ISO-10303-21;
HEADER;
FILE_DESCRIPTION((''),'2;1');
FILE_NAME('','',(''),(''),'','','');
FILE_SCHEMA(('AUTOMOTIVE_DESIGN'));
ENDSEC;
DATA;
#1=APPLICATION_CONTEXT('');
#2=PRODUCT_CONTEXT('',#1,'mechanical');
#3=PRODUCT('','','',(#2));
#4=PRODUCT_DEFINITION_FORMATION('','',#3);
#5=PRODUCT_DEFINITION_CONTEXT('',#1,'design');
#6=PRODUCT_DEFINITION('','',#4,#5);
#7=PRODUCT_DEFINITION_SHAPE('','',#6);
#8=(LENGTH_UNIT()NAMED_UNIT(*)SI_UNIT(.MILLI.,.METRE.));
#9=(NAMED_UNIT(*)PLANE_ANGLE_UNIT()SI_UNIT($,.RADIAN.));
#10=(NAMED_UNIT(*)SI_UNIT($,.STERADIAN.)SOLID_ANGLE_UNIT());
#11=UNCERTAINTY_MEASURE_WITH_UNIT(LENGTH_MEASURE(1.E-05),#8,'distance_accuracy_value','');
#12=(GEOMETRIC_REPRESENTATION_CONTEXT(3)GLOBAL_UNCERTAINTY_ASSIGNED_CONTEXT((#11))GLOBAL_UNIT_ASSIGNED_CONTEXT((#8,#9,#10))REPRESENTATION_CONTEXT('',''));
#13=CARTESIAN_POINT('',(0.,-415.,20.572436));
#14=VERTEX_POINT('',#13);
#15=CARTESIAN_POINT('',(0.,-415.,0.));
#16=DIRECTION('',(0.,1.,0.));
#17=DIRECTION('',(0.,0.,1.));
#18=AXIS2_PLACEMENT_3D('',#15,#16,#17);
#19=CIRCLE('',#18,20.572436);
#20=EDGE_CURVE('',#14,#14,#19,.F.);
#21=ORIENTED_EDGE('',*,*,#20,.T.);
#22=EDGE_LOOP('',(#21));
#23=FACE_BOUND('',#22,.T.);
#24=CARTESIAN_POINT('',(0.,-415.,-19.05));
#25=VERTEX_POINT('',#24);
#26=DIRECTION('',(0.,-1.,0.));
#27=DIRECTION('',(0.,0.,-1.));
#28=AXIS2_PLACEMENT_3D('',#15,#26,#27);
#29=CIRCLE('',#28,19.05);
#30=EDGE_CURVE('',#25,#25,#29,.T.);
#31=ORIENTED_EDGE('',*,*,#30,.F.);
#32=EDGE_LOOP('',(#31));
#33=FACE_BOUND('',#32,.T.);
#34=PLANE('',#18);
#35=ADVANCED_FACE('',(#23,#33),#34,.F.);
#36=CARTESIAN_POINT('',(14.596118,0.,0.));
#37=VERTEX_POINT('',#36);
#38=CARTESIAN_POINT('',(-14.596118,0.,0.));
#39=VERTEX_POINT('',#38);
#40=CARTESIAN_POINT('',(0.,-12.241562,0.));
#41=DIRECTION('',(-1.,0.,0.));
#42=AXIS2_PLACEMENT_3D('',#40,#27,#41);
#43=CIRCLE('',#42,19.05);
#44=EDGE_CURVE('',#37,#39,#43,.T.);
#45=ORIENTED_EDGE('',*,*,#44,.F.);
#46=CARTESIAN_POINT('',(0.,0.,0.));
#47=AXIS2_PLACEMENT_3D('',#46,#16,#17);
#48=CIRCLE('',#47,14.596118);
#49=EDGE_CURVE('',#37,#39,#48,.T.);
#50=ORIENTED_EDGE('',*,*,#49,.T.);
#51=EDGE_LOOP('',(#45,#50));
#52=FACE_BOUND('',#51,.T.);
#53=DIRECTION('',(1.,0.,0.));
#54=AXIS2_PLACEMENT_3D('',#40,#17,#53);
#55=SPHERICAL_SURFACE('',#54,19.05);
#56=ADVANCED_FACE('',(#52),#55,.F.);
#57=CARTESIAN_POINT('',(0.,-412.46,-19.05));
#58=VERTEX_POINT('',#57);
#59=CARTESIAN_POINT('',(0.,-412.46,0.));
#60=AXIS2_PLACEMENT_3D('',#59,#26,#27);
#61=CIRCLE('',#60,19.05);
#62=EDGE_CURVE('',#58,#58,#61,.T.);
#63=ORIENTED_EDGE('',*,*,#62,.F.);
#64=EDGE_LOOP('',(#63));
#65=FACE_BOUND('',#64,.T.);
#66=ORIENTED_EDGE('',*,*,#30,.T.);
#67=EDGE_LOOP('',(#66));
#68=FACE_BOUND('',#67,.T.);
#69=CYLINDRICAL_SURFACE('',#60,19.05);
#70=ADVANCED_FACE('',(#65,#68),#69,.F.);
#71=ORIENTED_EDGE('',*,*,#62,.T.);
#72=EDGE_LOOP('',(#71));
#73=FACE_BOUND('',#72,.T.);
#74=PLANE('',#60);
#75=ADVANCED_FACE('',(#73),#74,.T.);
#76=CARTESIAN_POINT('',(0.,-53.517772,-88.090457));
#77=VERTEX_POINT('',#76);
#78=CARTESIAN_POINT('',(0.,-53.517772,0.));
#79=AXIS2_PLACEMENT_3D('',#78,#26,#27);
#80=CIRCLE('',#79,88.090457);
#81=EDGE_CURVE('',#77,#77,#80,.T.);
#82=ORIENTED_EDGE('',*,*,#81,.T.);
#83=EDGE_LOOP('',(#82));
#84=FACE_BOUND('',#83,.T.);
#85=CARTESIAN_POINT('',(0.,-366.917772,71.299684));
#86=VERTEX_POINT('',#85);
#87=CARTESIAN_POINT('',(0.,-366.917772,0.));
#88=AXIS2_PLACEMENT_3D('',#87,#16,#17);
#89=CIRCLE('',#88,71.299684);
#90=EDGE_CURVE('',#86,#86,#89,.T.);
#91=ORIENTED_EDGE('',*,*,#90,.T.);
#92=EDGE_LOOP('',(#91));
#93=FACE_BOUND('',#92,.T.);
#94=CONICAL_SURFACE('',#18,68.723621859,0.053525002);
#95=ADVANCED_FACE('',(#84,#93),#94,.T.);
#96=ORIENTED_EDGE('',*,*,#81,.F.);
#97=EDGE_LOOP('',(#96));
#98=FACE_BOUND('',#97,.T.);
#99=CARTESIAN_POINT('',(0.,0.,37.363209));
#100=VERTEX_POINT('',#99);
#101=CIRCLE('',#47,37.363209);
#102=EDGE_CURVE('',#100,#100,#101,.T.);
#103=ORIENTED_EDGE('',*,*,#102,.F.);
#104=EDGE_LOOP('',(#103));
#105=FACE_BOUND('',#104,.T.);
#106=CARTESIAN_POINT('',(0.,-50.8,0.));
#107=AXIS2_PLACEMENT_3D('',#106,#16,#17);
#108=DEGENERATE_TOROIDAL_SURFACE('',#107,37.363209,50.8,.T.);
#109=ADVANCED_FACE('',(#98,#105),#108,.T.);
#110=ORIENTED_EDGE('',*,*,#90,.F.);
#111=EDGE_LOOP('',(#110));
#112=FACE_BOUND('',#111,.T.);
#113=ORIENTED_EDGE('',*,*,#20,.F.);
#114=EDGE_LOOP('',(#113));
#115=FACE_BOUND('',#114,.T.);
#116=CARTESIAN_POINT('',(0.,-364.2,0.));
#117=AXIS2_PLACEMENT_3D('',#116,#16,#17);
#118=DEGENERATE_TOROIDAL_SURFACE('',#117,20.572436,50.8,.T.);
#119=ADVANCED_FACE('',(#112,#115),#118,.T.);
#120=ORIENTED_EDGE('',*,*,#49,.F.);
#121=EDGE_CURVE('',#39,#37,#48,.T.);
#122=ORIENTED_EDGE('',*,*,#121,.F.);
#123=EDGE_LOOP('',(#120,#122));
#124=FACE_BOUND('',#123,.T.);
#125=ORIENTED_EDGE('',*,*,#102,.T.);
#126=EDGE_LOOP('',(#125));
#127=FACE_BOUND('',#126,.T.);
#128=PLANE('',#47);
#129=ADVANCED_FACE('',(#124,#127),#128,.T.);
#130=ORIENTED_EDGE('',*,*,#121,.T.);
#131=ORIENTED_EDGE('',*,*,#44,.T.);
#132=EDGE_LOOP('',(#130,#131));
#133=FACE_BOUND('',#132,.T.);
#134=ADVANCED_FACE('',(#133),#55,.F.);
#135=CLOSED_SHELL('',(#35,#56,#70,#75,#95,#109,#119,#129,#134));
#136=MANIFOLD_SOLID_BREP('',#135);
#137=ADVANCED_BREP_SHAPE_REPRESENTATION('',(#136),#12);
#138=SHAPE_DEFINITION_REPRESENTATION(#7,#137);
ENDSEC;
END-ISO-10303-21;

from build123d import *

# Parameters (mm, degrees)
SKETCH1_R           = 90.957734813
SKETCH2_R           = 68.723621859
FILLET1_R           = 50.8
SKETCH5_R           = 19.05
BOSS_EXTRUDE1_DEPTH = 19.05
FILLET2_R           = 19.05
SKETCH6_R           = 19.05
CUT_EXTRUDE1_DEPTH  = 2.54


with BuildPart() as part:
    # Sketch1 → Loft1 section 0
    with BuildSketch(Plane(origin=(0, 0, 0), x_dir=(1, 0, 0), z_dir=(0, 1, 0))):
        Circle(SKETCH1_R)
    # Sketch2 → Loft1 section 1
    with BuildSketch(Plane(origin=(0, -415, 0), x_dir=(-1, 0, 0), z_dir=(0, 1, 0))):
        Circle(SKETCH2_R)
    loft()

    # Fillet1
    fillet1_edges = [part.edges().sort_by_distance(p)[0] for p in [
        (-68.723621859, -415, 0),
        (-90.957734813, 0, 0),
    ]]
    fillet(fillet1_edges, radius=FILLET1_R)


with BuildPart() as body_2:
    # Sketch5 → Boss-Extrude1 (new, symmetric)
    with BuildSketch(Plane.XY):
        with Locations(Location((0, -12.241562165, 0), (0, 0, 180))):
            Circle(SKETCH5_R)
    extrude(amount=BOSS_EXTRUDE1_DEPTH, both=True)

    # Fillet2
    fillet2_edges = [body_2.edges().sort_by_distance(p)[0] for p in [
        (19.05, -12.241562165, -19.05),
        (19.05, -12.241562165, 19.05),
    ]]
    fillet(fillet2_edges, radius=FILLET2_R - 0.0001)  # a hair under: the kernel refuses the full size


with BuildPart() as part_1:
    add(part.part)

    # Combine1: cut body 2
    add(body_2.part, mode=Mode.SUBTRACT)

    # Sketch6 → Cut-Extrude1 (cut)
    with BuildSketch(Plane.XZ.offset(415)):
        with Locations(Location((0, 0, 0), (0, 0, 270))):
            Circle(SKETCH6_R)
    extrude(amount=-CUT_EXTRUDE1_DEPTH, mode=Mode.SUBTRACT)


solid = part_1.part
